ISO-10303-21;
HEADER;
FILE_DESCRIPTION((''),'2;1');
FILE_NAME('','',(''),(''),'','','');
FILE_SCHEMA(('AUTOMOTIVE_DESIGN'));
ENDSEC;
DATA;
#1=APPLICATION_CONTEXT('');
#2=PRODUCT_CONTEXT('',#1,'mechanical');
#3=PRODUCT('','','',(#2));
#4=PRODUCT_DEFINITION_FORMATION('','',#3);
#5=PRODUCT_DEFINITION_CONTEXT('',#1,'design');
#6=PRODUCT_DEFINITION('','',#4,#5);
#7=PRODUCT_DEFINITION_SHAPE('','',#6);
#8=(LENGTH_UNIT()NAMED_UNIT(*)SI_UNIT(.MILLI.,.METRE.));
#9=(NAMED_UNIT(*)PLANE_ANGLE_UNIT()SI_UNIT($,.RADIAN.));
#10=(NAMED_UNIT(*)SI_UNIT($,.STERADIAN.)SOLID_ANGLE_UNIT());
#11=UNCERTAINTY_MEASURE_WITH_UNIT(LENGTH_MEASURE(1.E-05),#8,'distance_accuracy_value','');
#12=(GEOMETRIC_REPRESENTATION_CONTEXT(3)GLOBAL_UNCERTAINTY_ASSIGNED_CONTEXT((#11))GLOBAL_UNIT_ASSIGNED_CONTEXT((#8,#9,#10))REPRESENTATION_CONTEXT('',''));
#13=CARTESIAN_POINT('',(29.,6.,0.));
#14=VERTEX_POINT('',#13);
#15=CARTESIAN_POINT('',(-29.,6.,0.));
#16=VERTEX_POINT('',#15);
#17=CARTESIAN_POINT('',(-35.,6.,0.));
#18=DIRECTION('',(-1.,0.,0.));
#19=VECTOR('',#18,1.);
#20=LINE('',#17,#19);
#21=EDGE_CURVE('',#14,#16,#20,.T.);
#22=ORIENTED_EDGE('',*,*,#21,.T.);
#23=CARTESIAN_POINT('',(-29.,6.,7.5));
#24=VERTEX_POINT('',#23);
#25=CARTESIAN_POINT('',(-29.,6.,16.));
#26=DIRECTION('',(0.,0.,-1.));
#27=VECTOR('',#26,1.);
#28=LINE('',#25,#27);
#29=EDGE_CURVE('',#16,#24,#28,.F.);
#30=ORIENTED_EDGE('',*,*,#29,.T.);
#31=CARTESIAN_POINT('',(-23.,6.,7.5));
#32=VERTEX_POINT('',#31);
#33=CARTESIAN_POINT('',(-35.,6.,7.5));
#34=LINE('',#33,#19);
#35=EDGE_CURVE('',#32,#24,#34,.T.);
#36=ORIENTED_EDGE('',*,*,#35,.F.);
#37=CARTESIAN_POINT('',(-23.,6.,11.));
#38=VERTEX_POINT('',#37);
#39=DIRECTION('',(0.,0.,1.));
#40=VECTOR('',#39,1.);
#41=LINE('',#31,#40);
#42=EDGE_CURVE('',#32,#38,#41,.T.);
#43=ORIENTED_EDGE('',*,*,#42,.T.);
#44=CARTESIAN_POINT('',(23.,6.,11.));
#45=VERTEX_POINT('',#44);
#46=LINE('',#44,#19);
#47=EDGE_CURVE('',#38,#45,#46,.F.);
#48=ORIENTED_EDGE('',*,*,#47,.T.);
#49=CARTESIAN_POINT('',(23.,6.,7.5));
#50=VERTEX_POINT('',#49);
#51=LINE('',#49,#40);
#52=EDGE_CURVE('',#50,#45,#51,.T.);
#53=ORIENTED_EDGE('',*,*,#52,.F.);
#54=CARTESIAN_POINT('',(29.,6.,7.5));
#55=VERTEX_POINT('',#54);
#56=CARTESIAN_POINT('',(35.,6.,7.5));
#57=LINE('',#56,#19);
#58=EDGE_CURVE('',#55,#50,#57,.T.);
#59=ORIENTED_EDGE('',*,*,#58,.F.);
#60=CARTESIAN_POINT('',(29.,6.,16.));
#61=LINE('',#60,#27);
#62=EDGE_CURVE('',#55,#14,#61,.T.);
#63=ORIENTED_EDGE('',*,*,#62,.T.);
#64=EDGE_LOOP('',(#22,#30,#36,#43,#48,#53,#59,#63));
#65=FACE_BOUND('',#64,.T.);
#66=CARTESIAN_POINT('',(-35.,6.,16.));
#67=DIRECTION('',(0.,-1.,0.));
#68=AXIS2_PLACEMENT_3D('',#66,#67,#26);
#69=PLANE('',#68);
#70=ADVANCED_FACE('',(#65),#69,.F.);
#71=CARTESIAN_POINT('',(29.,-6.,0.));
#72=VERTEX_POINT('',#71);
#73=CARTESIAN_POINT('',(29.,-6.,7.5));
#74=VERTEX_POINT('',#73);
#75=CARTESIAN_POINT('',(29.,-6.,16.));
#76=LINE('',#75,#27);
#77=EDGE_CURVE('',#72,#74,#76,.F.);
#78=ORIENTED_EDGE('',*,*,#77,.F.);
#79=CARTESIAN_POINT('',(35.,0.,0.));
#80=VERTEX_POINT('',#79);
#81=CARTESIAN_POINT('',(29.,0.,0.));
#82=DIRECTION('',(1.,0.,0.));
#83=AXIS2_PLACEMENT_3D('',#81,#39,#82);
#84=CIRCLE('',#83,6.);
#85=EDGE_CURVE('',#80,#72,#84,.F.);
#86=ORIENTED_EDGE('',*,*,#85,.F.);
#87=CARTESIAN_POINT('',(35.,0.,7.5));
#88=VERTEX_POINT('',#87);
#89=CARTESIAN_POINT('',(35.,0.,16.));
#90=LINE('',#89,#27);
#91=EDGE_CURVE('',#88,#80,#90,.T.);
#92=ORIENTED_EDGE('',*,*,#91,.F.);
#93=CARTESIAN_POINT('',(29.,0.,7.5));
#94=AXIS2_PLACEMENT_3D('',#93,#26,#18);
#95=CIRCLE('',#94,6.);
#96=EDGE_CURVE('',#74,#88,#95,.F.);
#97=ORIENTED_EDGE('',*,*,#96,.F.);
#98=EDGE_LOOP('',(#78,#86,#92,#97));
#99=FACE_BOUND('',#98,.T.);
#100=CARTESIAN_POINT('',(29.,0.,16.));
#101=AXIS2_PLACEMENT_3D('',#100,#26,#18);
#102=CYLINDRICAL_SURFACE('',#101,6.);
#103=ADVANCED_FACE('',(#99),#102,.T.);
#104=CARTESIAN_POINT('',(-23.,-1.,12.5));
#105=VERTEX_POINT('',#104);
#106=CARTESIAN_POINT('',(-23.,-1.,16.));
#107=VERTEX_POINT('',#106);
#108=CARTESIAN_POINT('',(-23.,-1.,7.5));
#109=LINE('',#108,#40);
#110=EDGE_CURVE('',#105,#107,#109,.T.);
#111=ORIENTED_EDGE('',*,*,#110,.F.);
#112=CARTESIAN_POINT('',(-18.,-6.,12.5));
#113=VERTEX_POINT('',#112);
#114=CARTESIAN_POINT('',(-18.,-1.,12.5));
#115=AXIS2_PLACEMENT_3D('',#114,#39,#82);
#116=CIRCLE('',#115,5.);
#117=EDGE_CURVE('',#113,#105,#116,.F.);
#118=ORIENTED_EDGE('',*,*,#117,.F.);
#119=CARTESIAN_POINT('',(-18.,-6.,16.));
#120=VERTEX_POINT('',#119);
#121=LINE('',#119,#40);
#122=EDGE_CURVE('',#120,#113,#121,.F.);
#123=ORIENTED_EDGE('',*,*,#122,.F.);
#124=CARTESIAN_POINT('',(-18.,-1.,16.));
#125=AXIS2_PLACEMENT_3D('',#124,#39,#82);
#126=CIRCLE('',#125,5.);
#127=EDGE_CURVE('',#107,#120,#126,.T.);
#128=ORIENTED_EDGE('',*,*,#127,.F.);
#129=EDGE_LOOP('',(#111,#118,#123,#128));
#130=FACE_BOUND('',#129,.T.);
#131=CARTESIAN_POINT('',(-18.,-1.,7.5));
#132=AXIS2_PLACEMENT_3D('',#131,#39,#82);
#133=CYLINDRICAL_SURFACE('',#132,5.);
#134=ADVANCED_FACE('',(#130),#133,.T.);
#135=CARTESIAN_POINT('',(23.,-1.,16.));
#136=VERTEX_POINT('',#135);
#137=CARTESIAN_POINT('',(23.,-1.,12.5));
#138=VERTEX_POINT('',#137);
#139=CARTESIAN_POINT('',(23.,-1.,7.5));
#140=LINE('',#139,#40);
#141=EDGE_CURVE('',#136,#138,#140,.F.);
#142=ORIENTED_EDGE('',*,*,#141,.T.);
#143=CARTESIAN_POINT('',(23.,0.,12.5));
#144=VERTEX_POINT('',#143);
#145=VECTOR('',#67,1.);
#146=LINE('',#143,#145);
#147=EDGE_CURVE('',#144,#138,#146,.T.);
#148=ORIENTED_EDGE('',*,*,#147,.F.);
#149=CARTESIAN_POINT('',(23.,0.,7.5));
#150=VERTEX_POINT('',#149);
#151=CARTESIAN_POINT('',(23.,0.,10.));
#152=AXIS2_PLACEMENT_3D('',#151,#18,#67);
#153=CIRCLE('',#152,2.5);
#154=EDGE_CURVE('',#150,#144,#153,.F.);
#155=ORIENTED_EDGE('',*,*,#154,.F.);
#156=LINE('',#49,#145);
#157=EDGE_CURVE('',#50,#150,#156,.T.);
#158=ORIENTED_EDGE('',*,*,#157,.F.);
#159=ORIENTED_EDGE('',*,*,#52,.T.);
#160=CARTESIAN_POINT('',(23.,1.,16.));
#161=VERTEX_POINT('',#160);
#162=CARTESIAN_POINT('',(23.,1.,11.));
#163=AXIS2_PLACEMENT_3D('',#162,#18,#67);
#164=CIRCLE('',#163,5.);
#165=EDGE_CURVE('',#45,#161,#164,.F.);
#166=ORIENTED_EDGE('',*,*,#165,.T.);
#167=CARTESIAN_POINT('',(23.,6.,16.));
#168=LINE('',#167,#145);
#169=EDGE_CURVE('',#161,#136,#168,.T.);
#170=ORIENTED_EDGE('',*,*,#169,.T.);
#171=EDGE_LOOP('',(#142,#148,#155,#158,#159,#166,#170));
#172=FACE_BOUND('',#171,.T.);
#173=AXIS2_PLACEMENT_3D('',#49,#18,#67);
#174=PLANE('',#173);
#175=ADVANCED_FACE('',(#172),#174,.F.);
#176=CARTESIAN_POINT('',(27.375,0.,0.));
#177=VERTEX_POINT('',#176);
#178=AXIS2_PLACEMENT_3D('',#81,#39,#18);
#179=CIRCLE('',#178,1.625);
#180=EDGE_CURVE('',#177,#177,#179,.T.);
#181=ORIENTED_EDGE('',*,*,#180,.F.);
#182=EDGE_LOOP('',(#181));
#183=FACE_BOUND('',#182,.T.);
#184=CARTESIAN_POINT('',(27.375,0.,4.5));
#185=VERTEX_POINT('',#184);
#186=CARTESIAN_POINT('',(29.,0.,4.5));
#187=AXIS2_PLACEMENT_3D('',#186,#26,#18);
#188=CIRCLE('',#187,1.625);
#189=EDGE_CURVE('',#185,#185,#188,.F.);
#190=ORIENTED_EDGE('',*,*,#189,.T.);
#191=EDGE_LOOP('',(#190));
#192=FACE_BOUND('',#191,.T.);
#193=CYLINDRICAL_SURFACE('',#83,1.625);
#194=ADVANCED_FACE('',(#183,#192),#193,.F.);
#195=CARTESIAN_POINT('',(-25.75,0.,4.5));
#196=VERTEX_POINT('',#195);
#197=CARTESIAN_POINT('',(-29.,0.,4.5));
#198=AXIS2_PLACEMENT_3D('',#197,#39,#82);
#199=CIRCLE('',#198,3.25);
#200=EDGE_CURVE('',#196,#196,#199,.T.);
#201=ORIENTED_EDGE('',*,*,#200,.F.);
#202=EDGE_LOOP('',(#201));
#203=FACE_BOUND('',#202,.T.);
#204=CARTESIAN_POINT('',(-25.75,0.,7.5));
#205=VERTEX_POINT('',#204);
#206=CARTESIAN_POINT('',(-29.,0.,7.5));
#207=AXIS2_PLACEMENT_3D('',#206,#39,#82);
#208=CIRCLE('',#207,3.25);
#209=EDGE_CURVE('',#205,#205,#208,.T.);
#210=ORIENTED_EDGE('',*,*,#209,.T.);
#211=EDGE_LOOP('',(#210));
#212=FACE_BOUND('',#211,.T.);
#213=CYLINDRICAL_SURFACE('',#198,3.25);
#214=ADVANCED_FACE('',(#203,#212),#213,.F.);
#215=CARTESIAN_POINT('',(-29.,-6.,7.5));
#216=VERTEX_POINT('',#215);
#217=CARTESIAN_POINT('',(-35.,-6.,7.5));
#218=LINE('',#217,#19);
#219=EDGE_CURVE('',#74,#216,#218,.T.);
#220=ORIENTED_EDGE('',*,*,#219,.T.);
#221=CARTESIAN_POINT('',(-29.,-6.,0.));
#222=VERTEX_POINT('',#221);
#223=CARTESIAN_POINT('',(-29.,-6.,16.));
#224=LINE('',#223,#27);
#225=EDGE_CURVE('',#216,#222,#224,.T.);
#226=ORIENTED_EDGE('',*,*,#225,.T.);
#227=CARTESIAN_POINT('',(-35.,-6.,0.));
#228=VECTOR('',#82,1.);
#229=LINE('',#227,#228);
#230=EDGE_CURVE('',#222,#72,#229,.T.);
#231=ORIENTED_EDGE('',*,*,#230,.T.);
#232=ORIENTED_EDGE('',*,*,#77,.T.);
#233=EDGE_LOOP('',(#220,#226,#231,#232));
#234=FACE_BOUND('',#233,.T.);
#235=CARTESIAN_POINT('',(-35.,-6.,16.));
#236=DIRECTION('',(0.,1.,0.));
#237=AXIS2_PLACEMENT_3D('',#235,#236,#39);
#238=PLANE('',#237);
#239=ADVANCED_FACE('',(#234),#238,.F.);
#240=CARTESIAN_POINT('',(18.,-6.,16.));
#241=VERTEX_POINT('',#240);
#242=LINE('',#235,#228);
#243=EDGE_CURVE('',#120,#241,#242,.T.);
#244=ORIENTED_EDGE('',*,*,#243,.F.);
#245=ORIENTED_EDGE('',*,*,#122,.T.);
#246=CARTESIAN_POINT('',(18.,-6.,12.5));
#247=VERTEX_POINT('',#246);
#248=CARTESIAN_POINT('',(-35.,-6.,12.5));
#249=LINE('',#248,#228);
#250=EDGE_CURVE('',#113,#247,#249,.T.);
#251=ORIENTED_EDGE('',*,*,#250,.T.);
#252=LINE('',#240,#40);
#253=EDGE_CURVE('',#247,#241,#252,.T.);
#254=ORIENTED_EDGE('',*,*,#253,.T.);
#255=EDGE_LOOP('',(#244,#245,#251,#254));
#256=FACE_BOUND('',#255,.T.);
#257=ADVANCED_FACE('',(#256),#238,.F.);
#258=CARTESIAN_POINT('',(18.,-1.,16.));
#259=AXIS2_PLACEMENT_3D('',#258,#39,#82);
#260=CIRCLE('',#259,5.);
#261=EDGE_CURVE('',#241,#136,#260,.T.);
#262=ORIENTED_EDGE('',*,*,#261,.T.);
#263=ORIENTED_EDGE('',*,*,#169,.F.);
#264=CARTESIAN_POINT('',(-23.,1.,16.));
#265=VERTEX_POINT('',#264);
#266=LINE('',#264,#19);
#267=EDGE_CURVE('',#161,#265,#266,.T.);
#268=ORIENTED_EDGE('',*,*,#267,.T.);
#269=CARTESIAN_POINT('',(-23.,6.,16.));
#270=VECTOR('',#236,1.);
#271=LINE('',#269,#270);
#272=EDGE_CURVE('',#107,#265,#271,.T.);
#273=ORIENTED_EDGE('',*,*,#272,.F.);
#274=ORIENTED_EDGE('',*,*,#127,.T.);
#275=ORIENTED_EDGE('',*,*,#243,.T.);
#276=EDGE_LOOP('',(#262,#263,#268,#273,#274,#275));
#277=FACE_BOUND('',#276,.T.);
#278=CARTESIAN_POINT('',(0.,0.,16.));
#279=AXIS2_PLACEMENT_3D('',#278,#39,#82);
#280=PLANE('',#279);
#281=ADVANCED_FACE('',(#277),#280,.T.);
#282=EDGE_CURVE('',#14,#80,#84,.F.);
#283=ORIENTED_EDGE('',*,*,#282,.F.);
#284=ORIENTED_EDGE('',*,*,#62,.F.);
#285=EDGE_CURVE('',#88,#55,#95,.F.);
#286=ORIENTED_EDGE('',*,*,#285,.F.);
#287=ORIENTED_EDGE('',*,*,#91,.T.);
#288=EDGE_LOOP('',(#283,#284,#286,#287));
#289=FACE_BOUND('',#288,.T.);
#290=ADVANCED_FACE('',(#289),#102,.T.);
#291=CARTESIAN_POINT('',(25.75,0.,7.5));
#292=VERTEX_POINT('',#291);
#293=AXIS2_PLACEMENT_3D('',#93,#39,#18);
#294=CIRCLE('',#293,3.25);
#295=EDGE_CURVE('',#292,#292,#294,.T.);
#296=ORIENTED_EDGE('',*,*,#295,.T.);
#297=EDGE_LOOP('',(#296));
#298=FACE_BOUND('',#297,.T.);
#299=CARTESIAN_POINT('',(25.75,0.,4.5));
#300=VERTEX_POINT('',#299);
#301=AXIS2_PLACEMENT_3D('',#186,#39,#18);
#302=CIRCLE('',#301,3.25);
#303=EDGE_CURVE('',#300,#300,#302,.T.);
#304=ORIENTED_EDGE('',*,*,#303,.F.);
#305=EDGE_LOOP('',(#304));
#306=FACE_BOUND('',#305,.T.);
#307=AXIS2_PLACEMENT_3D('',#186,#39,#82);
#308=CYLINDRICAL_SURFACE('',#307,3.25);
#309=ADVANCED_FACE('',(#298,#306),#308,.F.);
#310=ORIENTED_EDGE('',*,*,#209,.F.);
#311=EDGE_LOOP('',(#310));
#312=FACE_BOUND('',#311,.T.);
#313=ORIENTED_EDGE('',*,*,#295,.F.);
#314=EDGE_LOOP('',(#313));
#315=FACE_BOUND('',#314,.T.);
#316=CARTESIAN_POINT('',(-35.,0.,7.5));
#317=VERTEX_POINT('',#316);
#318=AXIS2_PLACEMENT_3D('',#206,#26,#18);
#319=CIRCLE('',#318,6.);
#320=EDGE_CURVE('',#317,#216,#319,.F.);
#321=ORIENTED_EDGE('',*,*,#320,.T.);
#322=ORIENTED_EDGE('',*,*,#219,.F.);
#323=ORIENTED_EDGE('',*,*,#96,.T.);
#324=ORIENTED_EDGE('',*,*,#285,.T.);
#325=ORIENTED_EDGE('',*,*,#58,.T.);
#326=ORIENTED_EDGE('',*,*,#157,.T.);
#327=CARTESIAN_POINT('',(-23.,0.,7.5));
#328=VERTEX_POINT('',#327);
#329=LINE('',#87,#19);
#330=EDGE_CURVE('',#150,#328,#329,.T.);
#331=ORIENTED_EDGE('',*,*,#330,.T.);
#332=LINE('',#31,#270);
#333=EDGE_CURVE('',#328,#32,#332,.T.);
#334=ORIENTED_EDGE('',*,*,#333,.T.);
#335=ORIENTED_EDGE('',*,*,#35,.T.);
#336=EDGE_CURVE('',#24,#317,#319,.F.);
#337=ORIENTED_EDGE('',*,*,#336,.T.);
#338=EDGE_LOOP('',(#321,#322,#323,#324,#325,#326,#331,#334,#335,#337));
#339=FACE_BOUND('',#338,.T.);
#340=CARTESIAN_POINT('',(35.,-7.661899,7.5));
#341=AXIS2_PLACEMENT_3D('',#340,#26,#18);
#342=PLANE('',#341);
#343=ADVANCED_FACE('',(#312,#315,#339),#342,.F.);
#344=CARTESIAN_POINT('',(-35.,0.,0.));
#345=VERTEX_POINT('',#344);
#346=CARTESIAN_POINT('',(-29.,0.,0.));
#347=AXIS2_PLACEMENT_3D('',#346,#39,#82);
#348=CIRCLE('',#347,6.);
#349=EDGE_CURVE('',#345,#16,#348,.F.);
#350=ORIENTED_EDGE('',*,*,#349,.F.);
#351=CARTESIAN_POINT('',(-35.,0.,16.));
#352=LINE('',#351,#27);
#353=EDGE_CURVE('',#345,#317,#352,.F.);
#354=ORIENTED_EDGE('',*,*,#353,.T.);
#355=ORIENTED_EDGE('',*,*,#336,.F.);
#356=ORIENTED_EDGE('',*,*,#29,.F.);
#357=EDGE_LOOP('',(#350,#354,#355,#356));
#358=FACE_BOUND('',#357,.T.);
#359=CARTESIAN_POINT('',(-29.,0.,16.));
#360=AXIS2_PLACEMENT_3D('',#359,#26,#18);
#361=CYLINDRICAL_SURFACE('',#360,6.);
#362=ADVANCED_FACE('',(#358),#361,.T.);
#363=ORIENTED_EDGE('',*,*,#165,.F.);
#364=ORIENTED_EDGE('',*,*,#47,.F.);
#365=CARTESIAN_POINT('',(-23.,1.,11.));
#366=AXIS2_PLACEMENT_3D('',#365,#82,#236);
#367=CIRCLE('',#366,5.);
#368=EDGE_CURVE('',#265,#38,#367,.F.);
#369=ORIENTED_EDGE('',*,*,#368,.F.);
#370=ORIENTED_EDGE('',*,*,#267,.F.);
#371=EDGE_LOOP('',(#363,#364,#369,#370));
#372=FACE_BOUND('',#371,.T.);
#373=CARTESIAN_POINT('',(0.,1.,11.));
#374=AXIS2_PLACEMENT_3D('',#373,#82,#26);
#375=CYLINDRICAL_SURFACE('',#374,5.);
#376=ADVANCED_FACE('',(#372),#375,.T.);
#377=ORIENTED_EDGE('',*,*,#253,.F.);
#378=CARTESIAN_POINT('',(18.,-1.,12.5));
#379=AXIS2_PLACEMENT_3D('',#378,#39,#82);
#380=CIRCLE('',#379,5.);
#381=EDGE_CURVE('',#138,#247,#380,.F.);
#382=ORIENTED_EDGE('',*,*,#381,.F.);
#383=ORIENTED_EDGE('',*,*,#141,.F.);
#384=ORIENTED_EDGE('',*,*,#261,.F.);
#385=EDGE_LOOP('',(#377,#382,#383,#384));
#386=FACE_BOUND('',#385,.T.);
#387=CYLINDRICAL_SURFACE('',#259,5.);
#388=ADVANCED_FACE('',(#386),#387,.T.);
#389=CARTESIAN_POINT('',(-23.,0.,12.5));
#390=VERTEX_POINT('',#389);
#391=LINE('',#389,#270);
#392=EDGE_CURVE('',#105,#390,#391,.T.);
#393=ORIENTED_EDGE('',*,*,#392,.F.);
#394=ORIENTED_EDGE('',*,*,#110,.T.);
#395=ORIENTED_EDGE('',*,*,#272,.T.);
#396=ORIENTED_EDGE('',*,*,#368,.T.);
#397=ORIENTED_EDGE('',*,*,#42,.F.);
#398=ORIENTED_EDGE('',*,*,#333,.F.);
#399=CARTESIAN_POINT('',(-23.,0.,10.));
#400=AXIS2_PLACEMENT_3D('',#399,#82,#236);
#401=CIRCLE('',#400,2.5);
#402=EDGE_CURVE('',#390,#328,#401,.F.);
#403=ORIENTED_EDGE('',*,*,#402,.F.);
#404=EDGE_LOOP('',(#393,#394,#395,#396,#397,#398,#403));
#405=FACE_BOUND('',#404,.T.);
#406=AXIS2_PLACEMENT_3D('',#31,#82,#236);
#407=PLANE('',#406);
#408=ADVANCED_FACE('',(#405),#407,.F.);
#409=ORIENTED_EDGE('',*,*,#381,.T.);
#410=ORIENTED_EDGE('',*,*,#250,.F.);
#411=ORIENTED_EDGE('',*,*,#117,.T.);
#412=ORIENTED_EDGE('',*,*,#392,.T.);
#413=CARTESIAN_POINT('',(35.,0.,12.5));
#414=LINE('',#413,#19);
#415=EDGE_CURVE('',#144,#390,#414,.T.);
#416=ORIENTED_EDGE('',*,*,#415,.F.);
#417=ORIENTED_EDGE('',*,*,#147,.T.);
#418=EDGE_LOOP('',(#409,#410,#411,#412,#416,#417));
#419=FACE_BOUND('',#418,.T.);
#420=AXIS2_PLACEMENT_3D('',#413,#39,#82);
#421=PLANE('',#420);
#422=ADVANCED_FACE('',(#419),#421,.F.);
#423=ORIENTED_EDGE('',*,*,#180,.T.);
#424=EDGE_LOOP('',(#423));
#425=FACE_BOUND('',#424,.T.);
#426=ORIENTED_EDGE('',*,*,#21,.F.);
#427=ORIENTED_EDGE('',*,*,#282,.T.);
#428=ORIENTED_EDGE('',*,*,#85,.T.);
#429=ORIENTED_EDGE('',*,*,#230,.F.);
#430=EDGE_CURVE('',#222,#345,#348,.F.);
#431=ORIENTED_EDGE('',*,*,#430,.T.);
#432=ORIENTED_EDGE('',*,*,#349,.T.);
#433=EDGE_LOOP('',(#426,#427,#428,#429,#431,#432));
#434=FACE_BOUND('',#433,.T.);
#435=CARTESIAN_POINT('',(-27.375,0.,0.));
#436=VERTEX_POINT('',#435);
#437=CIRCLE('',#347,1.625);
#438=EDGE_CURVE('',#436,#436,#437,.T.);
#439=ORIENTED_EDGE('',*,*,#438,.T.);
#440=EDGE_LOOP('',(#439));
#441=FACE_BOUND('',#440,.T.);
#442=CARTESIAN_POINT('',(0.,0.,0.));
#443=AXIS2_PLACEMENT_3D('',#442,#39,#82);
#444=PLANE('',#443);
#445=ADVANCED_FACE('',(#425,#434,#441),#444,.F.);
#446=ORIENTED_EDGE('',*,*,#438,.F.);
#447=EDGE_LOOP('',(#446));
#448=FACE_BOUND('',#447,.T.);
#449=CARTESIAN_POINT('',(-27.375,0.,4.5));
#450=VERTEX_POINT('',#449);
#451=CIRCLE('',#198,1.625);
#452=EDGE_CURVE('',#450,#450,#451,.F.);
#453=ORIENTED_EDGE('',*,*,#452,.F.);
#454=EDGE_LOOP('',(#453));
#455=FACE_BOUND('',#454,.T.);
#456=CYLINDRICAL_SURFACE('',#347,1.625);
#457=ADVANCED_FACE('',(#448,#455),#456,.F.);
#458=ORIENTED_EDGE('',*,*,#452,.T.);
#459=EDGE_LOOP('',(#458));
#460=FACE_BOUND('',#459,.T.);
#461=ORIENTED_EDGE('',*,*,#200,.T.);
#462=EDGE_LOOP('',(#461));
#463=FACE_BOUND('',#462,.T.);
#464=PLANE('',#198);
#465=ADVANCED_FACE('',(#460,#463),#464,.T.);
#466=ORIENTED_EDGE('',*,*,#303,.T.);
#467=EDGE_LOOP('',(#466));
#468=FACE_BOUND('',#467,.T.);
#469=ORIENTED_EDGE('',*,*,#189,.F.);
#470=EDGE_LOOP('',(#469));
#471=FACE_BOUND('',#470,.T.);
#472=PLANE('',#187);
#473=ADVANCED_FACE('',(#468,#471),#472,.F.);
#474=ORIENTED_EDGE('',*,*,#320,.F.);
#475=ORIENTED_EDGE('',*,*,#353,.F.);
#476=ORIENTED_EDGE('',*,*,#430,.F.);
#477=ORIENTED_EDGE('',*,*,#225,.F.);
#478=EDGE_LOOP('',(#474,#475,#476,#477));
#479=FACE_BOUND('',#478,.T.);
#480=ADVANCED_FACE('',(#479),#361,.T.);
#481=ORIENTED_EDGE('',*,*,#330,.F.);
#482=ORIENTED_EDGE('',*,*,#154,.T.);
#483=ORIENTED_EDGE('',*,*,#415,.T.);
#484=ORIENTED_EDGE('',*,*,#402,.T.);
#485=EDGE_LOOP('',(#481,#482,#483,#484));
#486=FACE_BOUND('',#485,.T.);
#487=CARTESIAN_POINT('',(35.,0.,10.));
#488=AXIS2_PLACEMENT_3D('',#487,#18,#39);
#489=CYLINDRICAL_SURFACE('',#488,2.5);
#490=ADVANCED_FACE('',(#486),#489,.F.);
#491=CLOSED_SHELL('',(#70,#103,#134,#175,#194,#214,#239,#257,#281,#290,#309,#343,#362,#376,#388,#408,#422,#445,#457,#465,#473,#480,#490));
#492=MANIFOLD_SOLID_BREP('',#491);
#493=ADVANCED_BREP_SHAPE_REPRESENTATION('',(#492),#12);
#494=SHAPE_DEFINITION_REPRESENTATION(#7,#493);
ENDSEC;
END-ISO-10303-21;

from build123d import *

# Parameters (mm, degrees)
SKETCH1_W           = 70
SKETCH1_H           = 12
BOSS_EXTRUDE1_DEPTH = 16
SKETCH2_R           = 2.5
CUT_EXTRUDE1_DEPTH  = 73.055534139
SKETCH3_W           = 5
SKETCH3_H           = 7.661898901
CUT_EXTRUDE2_DEPTH  = 73.055534139
SKETCH8_W           = 12
SKETCH8_H           = 12
CUT_EXTRUDE6_DEPTH  = 8.5
FILLET2_R           = 5
SKETCH9_R           = 1.625
CUT_EXTRUDE7_DEPTH  = 37.513696061
SKETCH10_R          = 3.25
CUT_EXTRUDE8_DEPTH  = 3
FILLET3_R           = 6
FILLET5_R           = 5


with BuildPart() as part:
    # Sketch1 → Boss-Extrude1 (new body)
    with BuildSketch(Plane.XY):
        Rectangle(SKETCH1_W, SKETCH1_H)
    extrude(amount=BOSS_EXTRUDE1_DEPTH)

    # Sketch2 → Cut-Extrude1 (cut, through all)
    with BuildSketch(Plane.ZY.offset(35)):
        with Locations((10, 0)):
            Circle(SKETCH2_R)
    extrude(amount=-CUT_EXTRUDE1_DEPTH, mode=Mode.SUBTRACT)

    # Sketch3 → Cut-Extrude2 (cut, through all)
    with BuildSketch(Plane.ZY.offset(35)):
        with Locations((10, -3.830949451)):
            Rectangle(SKETCH3_W, SKETCH3_H)
    extrude(amount=-CUT_EXTRUDE2_DEPTH, mode=Mode.SUBTRACT)

    # Sketch8 → Cut-Extrude6 (cut)
    with BuildSketch(Plane.XY.offset(16)):
        with Locations((-29, 0)):
            Rectangle(SKETCH8_W, SKETCH8_H)
        with Locations((29, 0)):
            Rectangle(SKETCH8_W, SKETCH8_H)
    extrude(amount=-CUT_EXTRUDE6_DEPTH, mode=Mode.SUBTRACT)

    # Fillet2
    fillet2_edges = [part.edges().sort_by_distance(p)[0] for p in [
        (0, 6, 16),
    ]]
    fillet(fillet2_edges, radius=FILLET2_R)

    # Sketch9 → Cut-Extrude7 (cut, through all)
    with BuildSketch(Plane.XY.offset(7.5)):
        with Locations((-29, 0)):
            Circle(SKETCH9_R)
        with Locations(Location((29, 0, 0), (0, 0, 180))):
            Circle(SKETCH9_R)
    extrude(amount=-CUT_EXTRUDE7_DEPTH, mode=Mode.SUBTRACT)

    # Sketch10 → Cut-Extrude8 (cut)
    with BuildSketch(Plane.XY.offset(7.5)):
        with Locations((-29, 0)):
            Circle(SKETCH10_R)
        with Locations(Location((29, 0, 0), (0, 0, 180))):
            Circle(SKETCH10_R)
    extrude(amount=-CUT_EXTRUDE8_DEPTH, mode=Mode.SUBTRACT)

    # Fillet3
    fillet3_edges = [part.edges().sort_by_distance(p)[0] for p in [
        (35, 6, 3.75),
        (35, -6, 3.75),
        (-35, 6, 3.75),
        (-35, -6, 3.75),
    ]]
    fillet(fillet3_edges, radius=FILLET3_R - 0.0001)  # a hair under: the kernel refuses the full size

    # Fillet5
    fillet5_edges = [part.edges().sort_by_distance(p)[0] for p in [
        (-23, -6, 14.25),
        (23, -6, 14.25),
    ]]
    fillet(fillet5_edges, radius=FILLET5_R)


solid = part.part
